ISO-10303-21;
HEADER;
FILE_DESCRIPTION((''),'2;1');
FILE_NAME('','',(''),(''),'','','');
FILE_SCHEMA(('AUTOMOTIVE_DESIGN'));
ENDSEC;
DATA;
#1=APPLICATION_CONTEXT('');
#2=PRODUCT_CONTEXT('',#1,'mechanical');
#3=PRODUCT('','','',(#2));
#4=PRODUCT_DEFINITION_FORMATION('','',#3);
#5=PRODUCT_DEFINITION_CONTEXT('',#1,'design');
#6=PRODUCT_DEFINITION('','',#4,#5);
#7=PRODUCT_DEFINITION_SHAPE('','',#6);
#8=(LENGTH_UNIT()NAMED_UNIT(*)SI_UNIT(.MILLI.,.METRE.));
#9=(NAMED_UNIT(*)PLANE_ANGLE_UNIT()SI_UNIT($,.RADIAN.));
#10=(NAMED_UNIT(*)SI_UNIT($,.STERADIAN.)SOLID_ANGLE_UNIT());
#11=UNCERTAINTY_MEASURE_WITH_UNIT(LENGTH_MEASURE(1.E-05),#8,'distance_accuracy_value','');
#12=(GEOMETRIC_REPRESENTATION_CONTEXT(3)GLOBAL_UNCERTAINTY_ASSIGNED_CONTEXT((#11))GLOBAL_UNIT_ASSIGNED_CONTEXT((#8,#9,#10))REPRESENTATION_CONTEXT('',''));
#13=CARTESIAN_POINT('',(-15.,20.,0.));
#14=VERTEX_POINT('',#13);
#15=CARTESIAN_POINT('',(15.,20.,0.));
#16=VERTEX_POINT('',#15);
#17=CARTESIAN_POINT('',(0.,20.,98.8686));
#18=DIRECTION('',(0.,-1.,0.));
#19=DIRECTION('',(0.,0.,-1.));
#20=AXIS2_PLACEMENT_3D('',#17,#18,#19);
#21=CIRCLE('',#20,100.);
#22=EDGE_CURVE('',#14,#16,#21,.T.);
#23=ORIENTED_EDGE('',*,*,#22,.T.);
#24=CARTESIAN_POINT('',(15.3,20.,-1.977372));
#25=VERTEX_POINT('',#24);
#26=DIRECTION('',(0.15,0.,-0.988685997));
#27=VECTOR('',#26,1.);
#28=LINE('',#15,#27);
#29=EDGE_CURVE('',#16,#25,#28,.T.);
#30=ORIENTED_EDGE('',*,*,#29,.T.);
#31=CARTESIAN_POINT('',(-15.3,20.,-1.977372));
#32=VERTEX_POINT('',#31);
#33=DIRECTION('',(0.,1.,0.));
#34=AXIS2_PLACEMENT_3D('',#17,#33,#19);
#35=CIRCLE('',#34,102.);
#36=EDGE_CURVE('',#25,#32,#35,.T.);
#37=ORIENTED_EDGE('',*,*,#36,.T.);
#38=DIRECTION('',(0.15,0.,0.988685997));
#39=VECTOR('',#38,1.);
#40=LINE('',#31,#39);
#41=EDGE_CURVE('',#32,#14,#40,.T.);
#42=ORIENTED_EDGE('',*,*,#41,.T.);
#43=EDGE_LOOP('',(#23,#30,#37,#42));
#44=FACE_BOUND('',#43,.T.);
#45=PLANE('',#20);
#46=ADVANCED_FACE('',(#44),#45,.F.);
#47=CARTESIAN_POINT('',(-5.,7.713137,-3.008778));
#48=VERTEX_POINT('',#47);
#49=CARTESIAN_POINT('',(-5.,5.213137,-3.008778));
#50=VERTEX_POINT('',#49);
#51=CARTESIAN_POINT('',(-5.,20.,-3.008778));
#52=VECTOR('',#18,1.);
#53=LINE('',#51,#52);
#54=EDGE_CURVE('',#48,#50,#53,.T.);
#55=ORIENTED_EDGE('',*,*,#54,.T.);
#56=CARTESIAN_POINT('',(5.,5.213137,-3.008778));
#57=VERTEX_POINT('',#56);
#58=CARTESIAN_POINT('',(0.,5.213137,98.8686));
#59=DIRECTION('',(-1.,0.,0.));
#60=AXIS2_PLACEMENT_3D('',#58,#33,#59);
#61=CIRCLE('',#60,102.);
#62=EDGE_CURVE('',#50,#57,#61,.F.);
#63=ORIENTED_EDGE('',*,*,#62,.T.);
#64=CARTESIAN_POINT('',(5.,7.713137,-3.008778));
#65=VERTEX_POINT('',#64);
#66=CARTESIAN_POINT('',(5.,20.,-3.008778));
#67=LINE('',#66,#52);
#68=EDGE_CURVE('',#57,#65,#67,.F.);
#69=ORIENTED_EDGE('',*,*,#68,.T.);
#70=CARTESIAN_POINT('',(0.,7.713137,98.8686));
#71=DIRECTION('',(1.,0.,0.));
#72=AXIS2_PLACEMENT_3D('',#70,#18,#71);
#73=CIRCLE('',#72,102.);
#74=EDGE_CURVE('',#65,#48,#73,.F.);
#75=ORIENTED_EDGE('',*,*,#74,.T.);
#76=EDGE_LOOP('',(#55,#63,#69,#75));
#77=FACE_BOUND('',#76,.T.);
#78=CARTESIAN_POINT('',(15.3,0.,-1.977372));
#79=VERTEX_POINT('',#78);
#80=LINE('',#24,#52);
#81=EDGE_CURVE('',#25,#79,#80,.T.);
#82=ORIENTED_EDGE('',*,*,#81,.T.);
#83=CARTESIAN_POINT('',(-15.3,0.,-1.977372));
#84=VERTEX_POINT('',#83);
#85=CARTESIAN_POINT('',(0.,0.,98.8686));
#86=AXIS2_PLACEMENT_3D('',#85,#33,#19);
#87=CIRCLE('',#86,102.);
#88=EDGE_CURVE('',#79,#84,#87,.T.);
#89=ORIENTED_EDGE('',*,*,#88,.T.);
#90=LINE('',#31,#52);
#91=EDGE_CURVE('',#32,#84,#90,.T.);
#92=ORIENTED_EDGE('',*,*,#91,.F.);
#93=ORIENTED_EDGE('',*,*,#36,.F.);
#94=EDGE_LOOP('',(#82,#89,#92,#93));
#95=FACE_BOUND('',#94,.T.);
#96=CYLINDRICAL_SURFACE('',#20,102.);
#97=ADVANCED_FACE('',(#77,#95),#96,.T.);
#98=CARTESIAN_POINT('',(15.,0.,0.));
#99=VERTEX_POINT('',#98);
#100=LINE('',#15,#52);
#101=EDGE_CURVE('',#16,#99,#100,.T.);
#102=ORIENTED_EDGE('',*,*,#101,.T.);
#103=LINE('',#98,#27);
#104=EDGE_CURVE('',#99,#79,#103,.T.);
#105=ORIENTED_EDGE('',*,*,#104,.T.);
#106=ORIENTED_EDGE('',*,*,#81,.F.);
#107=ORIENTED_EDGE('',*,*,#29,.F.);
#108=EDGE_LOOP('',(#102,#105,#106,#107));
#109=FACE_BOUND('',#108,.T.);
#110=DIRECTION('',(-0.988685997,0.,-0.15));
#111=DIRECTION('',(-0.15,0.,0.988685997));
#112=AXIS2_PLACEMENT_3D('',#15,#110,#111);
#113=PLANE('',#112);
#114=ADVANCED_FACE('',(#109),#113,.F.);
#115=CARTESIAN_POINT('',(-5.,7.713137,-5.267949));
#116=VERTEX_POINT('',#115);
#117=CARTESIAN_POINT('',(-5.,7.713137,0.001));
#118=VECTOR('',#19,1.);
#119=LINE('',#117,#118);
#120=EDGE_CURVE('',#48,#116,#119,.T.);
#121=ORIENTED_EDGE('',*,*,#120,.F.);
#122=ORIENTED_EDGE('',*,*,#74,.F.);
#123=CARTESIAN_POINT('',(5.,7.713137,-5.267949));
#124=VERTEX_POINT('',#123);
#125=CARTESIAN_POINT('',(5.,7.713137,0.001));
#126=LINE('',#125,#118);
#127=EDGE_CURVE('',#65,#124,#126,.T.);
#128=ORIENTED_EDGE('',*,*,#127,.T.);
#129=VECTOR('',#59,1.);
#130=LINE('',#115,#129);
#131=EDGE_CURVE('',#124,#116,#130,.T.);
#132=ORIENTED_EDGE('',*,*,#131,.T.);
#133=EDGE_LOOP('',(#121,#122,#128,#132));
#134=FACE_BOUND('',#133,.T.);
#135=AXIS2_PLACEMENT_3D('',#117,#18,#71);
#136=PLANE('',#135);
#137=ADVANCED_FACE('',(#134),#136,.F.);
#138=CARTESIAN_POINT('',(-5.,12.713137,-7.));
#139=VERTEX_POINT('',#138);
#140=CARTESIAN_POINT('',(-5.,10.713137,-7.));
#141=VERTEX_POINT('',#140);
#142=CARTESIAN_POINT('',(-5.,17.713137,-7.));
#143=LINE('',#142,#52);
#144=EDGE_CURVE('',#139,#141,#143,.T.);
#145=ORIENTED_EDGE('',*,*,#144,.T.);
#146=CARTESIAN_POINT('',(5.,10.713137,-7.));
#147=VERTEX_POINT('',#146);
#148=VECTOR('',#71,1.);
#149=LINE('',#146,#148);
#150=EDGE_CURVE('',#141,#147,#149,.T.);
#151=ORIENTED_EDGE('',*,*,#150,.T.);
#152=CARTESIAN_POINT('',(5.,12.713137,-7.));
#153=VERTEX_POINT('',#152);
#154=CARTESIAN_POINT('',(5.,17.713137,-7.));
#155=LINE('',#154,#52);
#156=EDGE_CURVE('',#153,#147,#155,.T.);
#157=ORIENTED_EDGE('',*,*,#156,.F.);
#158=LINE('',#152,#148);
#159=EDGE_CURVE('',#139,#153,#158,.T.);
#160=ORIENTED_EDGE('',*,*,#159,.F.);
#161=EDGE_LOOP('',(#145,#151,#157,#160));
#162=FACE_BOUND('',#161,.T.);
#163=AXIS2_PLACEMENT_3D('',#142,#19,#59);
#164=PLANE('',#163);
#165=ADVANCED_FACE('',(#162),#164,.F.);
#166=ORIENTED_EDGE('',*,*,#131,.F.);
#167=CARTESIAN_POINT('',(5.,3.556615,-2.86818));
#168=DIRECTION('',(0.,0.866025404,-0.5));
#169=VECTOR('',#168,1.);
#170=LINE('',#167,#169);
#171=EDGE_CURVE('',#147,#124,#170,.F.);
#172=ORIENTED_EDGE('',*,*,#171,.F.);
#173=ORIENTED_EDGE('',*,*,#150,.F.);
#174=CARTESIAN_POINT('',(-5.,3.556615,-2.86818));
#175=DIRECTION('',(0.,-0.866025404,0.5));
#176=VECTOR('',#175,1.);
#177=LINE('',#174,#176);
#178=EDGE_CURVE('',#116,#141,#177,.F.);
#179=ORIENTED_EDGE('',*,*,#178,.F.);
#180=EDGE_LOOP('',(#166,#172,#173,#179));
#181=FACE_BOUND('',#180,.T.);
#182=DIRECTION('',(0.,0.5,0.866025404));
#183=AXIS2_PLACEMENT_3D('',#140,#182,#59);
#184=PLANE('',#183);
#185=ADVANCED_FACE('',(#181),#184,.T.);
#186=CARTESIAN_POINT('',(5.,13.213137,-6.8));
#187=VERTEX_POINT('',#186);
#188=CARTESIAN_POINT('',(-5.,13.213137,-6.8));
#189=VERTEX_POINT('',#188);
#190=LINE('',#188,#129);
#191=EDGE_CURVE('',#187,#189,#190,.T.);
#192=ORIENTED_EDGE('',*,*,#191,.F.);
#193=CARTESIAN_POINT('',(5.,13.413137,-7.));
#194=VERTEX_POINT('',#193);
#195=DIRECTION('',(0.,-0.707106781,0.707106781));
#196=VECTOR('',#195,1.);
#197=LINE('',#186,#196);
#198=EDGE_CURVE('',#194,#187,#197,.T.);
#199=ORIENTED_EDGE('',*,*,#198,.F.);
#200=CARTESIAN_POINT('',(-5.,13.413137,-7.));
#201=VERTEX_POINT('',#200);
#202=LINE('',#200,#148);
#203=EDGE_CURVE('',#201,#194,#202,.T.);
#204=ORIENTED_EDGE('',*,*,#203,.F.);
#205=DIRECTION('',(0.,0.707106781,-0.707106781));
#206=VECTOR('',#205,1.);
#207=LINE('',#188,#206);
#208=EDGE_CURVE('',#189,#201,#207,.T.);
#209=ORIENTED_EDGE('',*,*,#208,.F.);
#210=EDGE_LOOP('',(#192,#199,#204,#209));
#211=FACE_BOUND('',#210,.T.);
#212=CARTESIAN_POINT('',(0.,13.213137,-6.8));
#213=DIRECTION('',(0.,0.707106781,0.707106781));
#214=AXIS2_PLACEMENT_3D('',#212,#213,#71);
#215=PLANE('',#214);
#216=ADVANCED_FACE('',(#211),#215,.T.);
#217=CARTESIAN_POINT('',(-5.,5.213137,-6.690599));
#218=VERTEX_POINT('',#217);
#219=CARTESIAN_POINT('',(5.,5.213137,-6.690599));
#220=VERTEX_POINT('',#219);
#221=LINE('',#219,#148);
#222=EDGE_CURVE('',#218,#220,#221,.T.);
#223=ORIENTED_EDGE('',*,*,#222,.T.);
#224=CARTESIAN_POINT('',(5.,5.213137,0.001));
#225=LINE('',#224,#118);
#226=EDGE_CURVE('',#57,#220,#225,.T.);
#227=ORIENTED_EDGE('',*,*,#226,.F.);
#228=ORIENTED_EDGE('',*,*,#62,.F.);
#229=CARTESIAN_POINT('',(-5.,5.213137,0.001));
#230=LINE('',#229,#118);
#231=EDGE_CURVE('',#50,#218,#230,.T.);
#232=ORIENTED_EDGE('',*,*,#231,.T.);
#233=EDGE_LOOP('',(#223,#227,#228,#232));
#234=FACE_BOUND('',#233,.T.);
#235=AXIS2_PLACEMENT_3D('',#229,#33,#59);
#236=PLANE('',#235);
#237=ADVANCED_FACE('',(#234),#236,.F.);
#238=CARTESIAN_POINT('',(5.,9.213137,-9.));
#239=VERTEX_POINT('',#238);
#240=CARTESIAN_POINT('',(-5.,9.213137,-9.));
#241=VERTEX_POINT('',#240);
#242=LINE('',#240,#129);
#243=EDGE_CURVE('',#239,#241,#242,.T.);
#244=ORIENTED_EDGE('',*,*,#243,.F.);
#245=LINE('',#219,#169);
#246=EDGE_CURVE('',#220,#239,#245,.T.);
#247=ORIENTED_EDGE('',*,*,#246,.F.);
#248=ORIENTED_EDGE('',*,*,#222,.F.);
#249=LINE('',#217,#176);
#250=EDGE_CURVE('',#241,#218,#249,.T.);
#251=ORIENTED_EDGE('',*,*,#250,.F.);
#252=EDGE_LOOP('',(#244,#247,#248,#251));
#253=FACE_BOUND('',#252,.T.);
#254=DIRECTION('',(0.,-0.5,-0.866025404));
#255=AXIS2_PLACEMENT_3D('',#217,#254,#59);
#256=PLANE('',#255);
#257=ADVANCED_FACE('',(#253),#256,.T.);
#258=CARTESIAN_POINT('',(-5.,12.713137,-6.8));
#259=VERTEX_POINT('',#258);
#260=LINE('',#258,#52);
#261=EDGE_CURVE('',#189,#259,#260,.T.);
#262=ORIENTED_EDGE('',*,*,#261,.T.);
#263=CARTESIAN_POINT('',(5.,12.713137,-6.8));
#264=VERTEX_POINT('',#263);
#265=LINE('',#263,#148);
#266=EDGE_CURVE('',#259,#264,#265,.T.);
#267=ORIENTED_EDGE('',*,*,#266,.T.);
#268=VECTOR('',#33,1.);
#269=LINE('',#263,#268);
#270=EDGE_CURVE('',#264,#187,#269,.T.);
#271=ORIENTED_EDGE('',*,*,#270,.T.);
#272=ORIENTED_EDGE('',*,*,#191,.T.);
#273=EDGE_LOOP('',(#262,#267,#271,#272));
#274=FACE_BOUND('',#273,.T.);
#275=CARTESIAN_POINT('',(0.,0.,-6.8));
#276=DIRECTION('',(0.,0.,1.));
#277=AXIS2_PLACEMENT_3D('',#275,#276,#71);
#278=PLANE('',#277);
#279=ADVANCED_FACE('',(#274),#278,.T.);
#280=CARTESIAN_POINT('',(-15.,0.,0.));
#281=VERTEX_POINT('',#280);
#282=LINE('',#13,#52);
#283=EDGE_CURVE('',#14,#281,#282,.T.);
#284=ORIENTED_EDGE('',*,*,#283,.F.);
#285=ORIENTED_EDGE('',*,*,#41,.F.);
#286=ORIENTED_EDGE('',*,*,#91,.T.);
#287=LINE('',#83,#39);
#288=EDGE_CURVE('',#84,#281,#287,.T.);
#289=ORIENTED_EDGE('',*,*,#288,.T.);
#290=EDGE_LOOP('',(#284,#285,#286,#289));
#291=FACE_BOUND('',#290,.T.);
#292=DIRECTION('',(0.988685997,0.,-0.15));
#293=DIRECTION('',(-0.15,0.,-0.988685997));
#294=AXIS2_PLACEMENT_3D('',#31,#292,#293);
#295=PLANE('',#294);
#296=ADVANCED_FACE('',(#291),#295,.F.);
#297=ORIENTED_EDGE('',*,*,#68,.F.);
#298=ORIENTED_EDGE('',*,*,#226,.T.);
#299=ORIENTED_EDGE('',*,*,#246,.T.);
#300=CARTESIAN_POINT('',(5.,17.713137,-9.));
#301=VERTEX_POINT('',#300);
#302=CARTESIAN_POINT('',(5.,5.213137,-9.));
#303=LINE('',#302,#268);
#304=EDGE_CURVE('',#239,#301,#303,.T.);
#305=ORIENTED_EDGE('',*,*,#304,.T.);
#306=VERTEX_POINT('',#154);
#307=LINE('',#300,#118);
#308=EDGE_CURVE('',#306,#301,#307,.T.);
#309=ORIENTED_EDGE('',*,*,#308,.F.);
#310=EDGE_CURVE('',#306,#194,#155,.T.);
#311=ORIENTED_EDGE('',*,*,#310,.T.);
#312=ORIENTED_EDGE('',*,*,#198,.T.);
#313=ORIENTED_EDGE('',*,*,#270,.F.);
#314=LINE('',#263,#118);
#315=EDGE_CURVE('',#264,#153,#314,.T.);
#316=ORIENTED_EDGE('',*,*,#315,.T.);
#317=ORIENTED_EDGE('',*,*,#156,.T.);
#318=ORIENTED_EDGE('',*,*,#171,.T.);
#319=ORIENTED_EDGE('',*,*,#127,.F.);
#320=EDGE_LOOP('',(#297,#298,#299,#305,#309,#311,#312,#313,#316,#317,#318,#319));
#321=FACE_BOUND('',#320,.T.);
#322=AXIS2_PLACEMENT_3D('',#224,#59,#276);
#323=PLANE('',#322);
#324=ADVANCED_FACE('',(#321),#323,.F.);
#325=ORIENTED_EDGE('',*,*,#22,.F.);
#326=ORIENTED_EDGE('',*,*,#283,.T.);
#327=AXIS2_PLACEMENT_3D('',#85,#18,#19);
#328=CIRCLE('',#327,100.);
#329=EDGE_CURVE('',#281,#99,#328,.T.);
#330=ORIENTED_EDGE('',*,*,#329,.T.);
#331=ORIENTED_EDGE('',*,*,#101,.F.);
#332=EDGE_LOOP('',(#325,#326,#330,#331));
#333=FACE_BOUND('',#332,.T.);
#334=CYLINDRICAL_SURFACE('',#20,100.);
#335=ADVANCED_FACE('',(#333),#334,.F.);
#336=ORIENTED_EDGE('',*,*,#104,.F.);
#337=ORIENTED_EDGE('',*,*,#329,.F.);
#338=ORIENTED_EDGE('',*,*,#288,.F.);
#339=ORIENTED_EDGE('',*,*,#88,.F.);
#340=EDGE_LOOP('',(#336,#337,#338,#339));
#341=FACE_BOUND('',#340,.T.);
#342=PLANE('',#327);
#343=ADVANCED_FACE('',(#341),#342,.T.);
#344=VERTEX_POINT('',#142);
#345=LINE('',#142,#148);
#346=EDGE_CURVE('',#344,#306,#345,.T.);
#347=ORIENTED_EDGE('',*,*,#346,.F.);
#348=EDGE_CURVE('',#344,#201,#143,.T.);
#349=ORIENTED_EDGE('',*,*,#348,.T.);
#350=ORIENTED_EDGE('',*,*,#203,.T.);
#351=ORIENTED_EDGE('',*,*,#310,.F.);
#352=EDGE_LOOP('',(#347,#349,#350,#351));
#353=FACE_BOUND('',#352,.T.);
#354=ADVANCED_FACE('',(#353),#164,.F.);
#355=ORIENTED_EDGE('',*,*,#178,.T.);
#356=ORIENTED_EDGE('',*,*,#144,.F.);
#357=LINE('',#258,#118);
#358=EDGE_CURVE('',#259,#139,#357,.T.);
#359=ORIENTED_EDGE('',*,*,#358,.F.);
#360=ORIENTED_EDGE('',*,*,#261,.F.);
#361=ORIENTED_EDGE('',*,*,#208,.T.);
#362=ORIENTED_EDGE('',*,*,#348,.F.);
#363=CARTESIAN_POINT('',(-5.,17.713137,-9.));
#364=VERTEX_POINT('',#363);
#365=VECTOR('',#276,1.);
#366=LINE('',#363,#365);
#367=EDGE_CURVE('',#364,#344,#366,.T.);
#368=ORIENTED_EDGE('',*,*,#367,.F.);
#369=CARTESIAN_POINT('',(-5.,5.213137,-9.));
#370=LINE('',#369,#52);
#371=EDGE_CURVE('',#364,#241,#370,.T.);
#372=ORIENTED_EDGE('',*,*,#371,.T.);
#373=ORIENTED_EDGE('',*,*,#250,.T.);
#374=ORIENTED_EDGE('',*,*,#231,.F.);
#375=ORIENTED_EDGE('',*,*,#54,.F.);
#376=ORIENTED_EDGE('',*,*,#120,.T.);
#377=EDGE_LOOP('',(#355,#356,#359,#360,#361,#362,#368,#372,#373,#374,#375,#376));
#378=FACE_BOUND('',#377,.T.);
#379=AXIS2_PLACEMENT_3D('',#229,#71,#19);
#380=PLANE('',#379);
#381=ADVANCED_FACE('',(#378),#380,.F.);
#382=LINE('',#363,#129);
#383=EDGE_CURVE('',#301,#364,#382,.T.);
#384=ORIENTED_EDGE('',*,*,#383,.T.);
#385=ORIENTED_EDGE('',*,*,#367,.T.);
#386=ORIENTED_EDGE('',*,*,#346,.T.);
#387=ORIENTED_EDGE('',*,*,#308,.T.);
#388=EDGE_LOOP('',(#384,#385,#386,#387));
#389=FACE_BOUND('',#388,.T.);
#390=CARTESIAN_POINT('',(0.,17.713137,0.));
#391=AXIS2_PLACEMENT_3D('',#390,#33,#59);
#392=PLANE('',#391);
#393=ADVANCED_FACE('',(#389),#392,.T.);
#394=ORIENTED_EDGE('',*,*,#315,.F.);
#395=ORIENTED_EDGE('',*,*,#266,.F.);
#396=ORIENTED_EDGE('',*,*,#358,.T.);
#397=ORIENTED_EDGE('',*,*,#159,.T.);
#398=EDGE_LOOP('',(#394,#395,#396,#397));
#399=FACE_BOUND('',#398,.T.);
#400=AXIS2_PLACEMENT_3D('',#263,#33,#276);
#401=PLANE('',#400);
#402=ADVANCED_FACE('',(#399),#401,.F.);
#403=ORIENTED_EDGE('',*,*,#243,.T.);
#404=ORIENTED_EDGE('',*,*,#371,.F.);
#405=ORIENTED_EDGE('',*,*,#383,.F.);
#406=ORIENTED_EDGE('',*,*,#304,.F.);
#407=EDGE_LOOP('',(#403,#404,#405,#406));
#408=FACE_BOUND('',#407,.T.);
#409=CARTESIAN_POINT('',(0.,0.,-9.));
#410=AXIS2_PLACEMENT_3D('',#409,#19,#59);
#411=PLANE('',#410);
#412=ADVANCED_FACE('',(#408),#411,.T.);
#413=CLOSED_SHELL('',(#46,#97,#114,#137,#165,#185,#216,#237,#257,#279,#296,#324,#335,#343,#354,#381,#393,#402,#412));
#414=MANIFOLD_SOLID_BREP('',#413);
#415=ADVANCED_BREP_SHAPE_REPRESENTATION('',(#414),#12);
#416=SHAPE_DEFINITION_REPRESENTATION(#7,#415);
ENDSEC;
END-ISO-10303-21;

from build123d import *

# Parameters (mm, degrees)
BOSS_EXTRUDE1_DEPTH      = 20
BOSS_EXTRUDE2_REACH      = 36.375
BOSS_EXTRUDE2_END_RADIUS = 102
BOSS_EXTRUDE2_START      = -9
SKETCH3_W                = 10
SKETCH3_H                = 2.5
SKETCH4_W                = 10
SKETCH4_H                = 2
BOSS_EXTRUDE3_DEPTH      = 10
CHAMFER2_SIZE            = 3
CHAMFER2_SIZE2           = 1.732050808
CHAMFER1_SIZE            = 4
CHAMFER1_SIZE2           = 2.309401077
SKETCH6_W                = 10
SKETCH6_H                = 1
BOSS_EXTRUDE4_DEPTH      = 0.2
CHAMFER3_SIZE            = 0.5


with BuildPart() as part:
    # Sketch2 → Boss-Extrude1 (new body)
    with BuildSketch(Plane(origin=(0, 0, 0), x_dir=(1, 0, 0), z_dir=(0, 1, 0))):
        with BuildLine():
            Line((-15.3, 1.977371993), (-15, 0))
            ThreePointArc((-15, 0), (0, 1.131400334), (15, 0))
            Line((15, 0), (15.3, 1.977371993))
            ThreePointArc((15.3, 1.977371993), (0, 3.131400334), (-15.3, 1.977371993))
        make_face()
    extrude(amount=BOSS_EXTRUDE1_DEPTH)

    # Boss-Extrude2: up to this cylinder (the profile starts outside it)
    boss_extrude2_end = Plane(origin=(0, 6.463137, 98.868599666), z_dir=(0, -1, 0)) * Cylinder(BOSS_EXTRUDE2_END_RADIUS, 277.75, mode=Mode.PRIVATE)
    # Sketch3 → Boss-Extrude2 (add, up to the surface)
    with BuildSketch(Plane.XY.offset(BOSS_EXTRUDE2_START), mode=Mode.PRIVATE) as boss_extrude2_sk1:
        with Locations((0, 6.463137396)):
            Rectangle(SKETCH3_W, SKETCH3_H)
    boss_extrude2_tool1 = extrude(boss_extrude2_sk1.sketch, amount=BOSS_EXTRUDE2_REACH, mode=Mode.PRIVATE) - boss_extrude2_end
    add(boss_extrude2_tool1.solids().sort_by_distance((0, 6.463137, -9))[0])

    # Sketch4 → Boss-Extrude3 (add)
    with BuildSketch(Plane(origin=(0, 7.713137396, 0), x_dir=(1, 0, 0), z_dir=(0, 1, 0))):
        with Locations((0, 8)):
            Rectangle(SKETCH4_W, SKETCH4_H)
    extrude(amount=BOSS_EXTRUDE3_DEPTH)

    # Chamfer2
    chamfer2_edges = [part.edges().sort_by_distance(p)[0] for p in [
        (0, 7.713137396, -7),
    ]]
    chamfer2_side = [part.faces().sort_by_distance(p)[0] for p in [
        (0, 12.713137396, -7),
    ]]
    chamfer(chamfer2_edges, length=CHAMFER2_SIZE, length2=CHAMFER2_SIZE2, reference=chamfer2_side[0])

    # Chamfer1
    chamfer1_edges = [part.edges().sort_by_distance(p)[0] for p in [
        (0, 5.213137396, -9),
    ]]
    chamfer1_side = [part.faces().sort_by_distance(p)[0] for p in [
        (0, 11.463137396, -9),
    ]]
    chamfer(chamfer1_edges, length=CHAMFER1_SIZE, length2=CHAMFER1_SIZE2, reference=chamfer1_side[0])

    # Sketch6 → Boss-Extrude4 (add)
    with BuildSketch(Plane.XY.offset(-7)):
        with Locations((0, 13.213137396)):
            Rectangle(SKETCH6_W, SKETCH6_H)
    extrude(amount=BOSS_EXTRUDE4_DEPTH)

    # Chamfer3
    # the kernel refuses this chamfer: 0.5 mm, written as the material it takes off along each edge
    with BuildSketch(Plane(origin=(-6.285841494, 13.713137396, -6.8), x_dir=(0, 0.027495876610585647, -0.9996219169112968), z_dir=(1, 0, 0))) as chamfer3_piece_1_section:
        Polygon((CHAMFER3_SIZE * 0.999621916911, -CHAMFER3_SIZE * 0.0274958766106), (-CHAMFER3_SIZE * 0.0274958766106, -CHAMFER3_SIZE * 0.999621916911), (0, 0), align=None)
    chamfer3_piece_1 = extrude(amount=12.571682988, mode=Mode.PRIVATE)
    chamfer3_piece_1 = split(chamfer3_piece_1, bisect_by=Plane(origin=(0, 13.506192151, -7), z_dir=(0, 0, 1)), keep=Keep.TOP, mode=Mode.PRIVATE)
    add(chamfer3_piece_1, mode=Mode.SUBTRACT)


solid = part.part
